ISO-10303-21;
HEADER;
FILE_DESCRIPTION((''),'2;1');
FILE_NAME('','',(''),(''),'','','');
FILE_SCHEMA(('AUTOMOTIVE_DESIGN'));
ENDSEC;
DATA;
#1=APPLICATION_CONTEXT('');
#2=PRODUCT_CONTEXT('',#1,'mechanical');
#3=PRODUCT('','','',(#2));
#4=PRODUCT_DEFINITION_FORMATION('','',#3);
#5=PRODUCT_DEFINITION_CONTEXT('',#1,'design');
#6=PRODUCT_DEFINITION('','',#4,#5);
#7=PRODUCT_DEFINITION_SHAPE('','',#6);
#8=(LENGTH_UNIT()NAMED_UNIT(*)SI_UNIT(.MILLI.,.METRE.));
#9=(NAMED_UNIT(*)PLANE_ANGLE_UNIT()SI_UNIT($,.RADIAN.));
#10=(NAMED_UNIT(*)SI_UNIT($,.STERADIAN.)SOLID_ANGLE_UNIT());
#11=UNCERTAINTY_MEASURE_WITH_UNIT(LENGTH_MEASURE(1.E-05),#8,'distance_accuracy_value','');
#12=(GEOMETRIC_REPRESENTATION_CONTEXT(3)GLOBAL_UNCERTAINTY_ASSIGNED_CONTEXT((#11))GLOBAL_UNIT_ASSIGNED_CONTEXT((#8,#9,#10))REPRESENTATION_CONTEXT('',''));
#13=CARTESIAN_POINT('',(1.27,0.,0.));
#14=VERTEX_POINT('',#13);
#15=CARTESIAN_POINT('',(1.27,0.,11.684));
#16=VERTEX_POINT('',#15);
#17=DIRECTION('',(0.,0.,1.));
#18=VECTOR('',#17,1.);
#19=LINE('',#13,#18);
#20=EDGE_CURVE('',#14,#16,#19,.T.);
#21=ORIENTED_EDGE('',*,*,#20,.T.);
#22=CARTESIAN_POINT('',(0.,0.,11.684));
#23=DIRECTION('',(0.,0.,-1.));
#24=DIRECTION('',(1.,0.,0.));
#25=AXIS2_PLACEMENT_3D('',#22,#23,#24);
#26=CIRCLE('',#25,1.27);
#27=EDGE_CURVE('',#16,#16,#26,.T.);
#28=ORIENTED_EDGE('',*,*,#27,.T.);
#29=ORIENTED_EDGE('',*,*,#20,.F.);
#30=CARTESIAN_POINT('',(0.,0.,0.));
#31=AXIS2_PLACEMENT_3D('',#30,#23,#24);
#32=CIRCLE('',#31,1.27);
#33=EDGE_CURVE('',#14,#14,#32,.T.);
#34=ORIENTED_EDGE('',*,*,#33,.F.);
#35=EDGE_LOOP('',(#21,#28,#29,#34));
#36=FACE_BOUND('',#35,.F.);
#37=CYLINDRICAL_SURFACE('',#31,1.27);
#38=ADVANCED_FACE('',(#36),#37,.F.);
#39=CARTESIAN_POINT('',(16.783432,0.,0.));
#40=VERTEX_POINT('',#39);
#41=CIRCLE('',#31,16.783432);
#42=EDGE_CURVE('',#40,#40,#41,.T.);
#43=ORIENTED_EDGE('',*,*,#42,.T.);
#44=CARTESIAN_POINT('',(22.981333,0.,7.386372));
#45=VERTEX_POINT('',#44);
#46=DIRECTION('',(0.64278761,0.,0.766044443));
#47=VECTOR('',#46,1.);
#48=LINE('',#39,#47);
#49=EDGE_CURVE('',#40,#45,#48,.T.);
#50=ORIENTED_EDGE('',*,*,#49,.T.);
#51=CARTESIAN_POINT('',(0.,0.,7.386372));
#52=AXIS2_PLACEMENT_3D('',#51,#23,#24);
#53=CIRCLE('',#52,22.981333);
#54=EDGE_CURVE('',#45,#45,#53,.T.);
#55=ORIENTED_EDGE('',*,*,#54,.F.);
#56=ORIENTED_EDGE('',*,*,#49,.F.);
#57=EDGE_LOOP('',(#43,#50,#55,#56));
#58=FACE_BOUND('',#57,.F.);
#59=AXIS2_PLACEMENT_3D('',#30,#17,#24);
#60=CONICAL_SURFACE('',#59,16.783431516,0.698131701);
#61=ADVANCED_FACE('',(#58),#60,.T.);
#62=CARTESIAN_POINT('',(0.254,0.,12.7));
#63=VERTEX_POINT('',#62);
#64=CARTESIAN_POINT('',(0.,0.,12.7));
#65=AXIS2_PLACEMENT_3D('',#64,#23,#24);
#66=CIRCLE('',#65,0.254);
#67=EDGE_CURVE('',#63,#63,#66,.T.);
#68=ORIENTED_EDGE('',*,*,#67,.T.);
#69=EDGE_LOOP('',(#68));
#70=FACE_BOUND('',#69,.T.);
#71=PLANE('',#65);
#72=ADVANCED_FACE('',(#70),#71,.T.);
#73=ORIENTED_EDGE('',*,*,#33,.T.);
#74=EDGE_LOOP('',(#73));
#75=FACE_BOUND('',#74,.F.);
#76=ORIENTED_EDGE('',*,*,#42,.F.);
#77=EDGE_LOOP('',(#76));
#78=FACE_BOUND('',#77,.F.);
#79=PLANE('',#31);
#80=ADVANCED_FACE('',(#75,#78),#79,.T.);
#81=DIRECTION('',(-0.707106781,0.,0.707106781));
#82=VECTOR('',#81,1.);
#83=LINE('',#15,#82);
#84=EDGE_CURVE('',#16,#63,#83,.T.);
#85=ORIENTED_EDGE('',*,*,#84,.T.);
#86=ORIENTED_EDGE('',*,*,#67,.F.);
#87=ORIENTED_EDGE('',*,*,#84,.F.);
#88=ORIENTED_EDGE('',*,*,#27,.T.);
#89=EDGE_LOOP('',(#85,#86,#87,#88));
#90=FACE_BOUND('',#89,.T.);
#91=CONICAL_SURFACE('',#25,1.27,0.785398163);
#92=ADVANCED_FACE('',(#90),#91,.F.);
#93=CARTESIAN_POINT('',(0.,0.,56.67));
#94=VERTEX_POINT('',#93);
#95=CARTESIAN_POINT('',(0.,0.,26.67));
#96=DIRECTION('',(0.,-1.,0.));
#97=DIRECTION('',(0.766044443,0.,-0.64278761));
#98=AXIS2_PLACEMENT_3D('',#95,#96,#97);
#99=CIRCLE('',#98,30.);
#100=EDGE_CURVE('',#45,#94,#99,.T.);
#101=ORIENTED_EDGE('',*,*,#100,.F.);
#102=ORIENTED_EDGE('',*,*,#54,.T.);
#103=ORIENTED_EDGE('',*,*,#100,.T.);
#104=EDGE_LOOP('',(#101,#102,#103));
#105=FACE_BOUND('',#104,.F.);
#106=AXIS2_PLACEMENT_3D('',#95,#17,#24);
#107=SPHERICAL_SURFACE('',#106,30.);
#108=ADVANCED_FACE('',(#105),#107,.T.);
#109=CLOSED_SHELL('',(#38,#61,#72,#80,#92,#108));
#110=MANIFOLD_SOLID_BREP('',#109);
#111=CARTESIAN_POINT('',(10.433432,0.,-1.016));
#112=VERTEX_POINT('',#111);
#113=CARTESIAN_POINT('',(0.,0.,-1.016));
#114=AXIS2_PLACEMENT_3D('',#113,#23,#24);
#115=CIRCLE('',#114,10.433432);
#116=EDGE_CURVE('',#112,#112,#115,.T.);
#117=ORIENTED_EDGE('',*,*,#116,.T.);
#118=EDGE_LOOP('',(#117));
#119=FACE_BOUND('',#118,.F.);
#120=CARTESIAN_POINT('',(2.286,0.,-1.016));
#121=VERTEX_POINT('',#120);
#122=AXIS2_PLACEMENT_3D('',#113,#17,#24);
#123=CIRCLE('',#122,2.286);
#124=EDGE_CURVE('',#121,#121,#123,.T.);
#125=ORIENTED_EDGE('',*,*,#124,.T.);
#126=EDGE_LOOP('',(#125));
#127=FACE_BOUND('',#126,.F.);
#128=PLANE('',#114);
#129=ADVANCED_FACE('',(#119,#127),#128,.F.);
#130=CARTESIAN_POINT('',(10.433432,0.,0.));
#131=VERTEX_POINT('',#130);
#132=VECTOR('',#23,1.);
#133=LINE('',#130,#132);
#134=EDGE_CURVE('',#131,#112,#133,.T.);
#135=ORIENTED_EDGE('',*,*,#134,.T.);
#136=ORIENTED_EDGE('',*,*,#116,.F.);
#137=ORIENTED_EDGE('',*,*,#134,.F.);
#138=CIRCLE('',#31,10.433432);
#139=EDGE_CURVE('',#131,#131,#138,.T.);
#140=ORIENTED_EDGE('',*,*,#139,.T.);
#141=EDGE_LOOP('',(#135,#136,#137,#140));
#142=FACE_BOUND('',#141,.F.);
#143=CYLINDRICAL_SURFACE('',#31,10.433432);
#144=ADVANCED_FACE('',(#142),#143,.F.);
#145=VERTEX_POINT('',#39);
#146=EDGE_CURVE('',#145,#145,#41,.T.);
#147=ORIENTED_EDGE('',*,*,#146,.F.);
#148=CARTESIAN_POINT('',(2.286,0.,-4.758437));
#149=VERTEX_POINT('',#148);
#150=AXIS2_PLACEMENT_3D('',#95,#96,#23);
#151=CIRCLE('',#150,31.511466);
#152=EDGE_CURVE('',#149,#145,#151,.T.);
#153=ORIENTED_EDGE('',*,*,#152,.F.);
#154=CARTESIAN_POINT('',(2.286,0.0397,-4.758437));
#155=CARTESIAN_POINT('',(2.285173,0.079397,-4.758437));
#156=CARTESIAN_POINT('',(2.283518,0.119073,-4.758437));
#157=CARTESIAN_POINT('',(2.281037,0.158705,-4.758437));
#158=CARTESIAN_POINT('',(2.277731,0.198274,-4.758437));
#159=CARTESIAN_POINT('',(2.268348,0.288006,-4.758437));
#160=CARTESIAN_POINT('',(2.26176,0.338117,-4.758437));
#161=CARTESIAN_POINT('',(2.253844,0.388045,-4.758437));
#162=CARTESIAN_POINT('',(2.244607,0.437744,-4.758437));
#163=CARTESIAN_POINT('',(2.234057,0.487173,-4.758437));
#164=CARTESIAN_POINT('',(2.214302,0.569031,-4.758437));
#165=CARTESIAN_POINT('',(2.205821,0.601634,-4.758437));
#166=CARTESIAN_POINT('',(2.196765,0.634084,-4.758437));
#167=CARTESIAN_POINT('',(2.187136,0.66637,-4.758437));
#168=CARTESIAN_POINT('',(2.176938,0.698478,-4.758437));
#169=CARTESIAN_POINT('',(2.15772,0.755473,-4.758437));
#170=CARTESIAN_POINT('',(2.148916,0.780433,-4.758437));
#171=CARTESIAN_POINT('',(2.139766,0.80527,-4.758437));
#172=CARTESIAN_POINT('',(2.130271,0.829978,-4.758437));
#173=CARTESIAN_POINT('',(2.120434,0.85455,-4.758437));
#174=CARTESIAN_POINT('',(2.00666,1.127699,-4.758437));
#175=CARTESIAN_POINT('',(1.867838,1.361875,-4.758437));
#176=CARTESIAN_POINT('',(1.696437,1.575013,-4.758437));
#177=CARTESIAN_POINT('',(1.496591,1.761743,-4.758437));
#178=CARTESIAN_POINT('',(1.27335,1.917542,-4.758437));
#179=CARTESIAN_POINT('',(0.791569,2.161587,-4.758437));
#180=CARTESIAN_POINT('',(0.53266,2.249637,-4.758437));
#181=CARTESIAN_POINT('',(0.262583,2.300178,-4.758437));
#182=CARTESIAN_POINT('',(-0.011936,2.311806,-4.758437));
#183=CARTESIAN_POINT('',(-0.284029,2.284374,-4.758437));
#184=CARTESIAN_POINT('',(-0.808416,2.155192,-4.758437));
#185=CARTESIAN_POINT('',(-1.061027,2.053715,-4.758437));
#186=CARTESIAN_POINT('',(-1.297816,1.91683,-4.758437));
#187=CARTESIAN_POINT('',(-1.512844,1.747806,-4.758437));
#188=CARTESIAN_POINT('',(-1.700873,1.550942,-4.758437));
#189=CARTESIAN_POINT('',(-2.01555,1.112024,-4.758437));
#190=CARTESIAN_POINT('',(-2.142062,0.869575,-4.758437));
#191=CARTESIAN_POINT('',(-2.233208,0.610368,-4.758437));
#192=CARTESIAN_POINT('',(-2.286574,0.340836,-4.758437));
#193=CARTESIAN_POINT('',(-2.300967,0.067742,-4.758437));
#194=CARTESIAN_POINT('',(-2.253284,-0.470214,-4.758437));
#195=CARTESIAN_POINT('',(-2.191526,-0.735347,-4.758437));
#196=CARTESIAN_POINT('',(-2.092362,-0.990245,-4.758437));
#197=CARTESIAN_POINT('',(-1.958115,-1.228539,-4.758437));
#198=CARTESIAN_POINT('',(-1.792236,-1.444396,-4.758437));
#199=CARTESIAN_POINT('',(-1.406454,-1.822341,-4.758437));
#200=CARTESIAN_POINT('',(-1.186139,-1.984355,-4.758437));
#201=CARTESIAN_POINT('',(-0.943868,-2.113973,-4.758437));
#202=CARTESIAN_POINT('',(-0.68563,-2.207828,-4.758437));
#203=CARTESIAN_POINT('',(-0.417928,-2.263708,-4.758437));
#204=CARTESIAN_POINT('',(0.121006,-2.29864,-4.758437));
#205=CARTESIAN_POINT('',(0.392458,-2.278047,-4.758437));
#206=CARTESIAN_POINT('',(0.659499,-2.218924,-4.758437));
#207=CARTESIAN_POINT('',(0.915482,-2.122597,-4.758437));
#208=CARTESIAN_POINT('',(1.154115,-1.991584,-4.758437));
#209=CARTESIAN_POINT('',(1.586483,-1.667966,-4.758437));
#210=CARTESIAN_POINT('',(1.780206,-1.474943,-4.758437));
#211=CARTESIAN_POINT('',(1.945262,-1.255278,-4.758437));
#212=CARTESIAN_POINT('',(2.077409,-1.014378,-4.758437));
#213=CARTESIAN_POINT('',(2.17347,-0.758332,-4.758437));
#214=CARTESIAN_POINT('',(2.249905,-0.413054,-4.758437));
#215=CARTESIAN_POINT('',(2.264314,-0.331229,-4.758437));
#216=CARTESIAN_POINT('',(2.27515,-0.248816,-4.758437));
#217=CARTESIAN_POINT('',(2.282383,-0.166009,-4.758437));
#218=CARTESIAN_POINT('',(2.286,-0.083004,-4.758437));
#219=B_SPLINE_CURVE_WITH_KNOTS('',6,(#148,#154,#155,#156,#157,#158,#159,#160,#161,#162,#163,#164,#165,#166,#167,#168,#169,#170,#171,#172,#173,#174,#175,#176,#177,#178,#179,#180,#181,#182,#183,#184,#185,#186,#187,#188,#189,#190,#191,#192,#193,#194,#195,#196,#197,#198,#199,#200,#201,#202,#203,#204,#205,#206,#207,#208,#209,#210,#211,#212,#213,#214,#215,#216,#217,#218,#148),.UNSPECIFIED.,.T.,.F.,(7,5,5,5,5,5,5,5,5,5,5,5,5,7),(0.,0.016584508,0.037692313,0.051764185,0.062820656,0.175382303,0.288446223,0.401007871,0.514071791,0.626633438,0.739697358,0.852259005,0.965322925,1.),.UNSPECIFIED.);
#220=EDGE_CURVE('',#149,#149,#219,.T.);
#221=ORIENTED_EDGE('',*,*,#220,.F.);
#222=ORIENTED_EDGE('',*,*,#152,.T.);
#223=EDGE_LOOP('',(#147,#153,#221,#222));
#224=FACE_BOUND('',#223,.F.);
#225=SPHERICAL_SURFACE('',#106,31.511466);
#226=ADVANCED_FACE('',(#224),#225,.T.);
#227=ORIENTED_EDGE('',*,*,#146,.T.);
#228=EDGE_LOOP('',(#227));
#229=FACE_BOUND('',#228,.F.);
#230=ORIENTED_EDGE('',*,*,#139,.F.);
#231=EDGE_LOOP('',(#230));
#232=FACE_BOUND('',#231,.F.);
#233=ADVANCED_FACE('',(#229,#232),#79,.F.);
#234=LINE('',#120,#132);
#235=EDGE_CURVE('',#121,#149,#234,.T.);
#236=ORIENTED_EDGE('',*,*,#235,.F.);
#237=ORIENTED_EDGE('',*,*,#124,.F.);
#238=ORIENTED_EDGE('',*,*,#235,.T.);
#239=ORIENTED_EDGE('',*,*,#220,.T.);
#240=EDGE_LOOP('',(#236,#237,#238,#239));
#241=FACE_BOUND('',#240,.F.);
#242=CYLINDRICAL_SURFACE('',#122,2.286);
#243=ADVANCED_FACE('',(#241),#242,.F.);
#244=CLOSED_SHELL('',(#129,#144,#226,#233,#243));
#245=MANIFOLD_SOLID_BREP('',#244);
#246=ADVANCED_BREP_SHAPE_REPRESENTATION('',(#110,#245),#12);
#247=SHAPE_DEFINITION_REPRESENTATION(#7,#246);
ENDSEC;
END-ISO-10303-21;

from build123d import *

# Parameters (mm, degrees)
F2_R     = 1.27
F3_DEPTH = 12.7
F4_SIZE  = 1.016
F7_R     = 2.286
F8_DEPTH = 25.4


# Not quite as in the source:
# - a feature names something its author has since deleted; it is built from what else it names


with BuildPart() as f1:
    # F0 (on Front) → F1 (revolve)
    with BuildSketch(Plane.XZ):
        with BuildLine():
            Line((16.7834315165, 0), (22.9813332936, 7.3863717094))
            ThreePointArc((22.9813332936, 7.3863717094), (27.1892336111, 39.3485478522), (0, 56.67))
            Line((0, 56.67), (0, 0))
            Line((0, 0), (16.7834315165, 0))
        make_face()
    revolve(axis=Axis((0, 0, -28.7515761617), (0, 0, -1)))

    # F2 (on face) → F3 (cut)
    with BuildSketch(Plane(origin=(0, 0, 0), x_dir=(1, 0, 0), z_dir=(0, 0, -1))):
        Circle(F2_R)
    extrude(amount=-F3_DEPTH, mode=Mode.SUBTRACT)

    # F4
    f4_edges = [f1.edges().sort_by_distance(p)[0] for p in [
        (-1.27, 0, 12.7),
    ]]
    chamfer(f4_edges, length=F4_SIZE)


with BuildPart() as f6:
    # F5 (on Front) → F6 (revolve)
    with BuildSketch(Plane.XZ):
        with BuildLine():
            Line((0, -1.016), (0, -4.8414657461))
            ThreePointArc((0, -4.8414657461), (8.7338903708, -3.6069158346), (16.7834315165, 0))
            Line((16.7834315165, 0), (10.4334315165, 0))
            Line((10.4334315165, 0), (10.4334315165, -1.016))
            Line((10.4334315165, -1.016), (0, -1.016))
        make_face()
    revolve(axis=Axis((0, 0, -28.7515761617), (0, 0, -1)))

    # F7 (on face) → F8 (cut)
    with BuildSketch(Plane.XY.offset(-1.016)):
        Circle(F7_R)
    extrude(amount=-F8_DEPTH, mode=Mode.SUBTRACT)


solid = Compound([f1.part, f6.part])
